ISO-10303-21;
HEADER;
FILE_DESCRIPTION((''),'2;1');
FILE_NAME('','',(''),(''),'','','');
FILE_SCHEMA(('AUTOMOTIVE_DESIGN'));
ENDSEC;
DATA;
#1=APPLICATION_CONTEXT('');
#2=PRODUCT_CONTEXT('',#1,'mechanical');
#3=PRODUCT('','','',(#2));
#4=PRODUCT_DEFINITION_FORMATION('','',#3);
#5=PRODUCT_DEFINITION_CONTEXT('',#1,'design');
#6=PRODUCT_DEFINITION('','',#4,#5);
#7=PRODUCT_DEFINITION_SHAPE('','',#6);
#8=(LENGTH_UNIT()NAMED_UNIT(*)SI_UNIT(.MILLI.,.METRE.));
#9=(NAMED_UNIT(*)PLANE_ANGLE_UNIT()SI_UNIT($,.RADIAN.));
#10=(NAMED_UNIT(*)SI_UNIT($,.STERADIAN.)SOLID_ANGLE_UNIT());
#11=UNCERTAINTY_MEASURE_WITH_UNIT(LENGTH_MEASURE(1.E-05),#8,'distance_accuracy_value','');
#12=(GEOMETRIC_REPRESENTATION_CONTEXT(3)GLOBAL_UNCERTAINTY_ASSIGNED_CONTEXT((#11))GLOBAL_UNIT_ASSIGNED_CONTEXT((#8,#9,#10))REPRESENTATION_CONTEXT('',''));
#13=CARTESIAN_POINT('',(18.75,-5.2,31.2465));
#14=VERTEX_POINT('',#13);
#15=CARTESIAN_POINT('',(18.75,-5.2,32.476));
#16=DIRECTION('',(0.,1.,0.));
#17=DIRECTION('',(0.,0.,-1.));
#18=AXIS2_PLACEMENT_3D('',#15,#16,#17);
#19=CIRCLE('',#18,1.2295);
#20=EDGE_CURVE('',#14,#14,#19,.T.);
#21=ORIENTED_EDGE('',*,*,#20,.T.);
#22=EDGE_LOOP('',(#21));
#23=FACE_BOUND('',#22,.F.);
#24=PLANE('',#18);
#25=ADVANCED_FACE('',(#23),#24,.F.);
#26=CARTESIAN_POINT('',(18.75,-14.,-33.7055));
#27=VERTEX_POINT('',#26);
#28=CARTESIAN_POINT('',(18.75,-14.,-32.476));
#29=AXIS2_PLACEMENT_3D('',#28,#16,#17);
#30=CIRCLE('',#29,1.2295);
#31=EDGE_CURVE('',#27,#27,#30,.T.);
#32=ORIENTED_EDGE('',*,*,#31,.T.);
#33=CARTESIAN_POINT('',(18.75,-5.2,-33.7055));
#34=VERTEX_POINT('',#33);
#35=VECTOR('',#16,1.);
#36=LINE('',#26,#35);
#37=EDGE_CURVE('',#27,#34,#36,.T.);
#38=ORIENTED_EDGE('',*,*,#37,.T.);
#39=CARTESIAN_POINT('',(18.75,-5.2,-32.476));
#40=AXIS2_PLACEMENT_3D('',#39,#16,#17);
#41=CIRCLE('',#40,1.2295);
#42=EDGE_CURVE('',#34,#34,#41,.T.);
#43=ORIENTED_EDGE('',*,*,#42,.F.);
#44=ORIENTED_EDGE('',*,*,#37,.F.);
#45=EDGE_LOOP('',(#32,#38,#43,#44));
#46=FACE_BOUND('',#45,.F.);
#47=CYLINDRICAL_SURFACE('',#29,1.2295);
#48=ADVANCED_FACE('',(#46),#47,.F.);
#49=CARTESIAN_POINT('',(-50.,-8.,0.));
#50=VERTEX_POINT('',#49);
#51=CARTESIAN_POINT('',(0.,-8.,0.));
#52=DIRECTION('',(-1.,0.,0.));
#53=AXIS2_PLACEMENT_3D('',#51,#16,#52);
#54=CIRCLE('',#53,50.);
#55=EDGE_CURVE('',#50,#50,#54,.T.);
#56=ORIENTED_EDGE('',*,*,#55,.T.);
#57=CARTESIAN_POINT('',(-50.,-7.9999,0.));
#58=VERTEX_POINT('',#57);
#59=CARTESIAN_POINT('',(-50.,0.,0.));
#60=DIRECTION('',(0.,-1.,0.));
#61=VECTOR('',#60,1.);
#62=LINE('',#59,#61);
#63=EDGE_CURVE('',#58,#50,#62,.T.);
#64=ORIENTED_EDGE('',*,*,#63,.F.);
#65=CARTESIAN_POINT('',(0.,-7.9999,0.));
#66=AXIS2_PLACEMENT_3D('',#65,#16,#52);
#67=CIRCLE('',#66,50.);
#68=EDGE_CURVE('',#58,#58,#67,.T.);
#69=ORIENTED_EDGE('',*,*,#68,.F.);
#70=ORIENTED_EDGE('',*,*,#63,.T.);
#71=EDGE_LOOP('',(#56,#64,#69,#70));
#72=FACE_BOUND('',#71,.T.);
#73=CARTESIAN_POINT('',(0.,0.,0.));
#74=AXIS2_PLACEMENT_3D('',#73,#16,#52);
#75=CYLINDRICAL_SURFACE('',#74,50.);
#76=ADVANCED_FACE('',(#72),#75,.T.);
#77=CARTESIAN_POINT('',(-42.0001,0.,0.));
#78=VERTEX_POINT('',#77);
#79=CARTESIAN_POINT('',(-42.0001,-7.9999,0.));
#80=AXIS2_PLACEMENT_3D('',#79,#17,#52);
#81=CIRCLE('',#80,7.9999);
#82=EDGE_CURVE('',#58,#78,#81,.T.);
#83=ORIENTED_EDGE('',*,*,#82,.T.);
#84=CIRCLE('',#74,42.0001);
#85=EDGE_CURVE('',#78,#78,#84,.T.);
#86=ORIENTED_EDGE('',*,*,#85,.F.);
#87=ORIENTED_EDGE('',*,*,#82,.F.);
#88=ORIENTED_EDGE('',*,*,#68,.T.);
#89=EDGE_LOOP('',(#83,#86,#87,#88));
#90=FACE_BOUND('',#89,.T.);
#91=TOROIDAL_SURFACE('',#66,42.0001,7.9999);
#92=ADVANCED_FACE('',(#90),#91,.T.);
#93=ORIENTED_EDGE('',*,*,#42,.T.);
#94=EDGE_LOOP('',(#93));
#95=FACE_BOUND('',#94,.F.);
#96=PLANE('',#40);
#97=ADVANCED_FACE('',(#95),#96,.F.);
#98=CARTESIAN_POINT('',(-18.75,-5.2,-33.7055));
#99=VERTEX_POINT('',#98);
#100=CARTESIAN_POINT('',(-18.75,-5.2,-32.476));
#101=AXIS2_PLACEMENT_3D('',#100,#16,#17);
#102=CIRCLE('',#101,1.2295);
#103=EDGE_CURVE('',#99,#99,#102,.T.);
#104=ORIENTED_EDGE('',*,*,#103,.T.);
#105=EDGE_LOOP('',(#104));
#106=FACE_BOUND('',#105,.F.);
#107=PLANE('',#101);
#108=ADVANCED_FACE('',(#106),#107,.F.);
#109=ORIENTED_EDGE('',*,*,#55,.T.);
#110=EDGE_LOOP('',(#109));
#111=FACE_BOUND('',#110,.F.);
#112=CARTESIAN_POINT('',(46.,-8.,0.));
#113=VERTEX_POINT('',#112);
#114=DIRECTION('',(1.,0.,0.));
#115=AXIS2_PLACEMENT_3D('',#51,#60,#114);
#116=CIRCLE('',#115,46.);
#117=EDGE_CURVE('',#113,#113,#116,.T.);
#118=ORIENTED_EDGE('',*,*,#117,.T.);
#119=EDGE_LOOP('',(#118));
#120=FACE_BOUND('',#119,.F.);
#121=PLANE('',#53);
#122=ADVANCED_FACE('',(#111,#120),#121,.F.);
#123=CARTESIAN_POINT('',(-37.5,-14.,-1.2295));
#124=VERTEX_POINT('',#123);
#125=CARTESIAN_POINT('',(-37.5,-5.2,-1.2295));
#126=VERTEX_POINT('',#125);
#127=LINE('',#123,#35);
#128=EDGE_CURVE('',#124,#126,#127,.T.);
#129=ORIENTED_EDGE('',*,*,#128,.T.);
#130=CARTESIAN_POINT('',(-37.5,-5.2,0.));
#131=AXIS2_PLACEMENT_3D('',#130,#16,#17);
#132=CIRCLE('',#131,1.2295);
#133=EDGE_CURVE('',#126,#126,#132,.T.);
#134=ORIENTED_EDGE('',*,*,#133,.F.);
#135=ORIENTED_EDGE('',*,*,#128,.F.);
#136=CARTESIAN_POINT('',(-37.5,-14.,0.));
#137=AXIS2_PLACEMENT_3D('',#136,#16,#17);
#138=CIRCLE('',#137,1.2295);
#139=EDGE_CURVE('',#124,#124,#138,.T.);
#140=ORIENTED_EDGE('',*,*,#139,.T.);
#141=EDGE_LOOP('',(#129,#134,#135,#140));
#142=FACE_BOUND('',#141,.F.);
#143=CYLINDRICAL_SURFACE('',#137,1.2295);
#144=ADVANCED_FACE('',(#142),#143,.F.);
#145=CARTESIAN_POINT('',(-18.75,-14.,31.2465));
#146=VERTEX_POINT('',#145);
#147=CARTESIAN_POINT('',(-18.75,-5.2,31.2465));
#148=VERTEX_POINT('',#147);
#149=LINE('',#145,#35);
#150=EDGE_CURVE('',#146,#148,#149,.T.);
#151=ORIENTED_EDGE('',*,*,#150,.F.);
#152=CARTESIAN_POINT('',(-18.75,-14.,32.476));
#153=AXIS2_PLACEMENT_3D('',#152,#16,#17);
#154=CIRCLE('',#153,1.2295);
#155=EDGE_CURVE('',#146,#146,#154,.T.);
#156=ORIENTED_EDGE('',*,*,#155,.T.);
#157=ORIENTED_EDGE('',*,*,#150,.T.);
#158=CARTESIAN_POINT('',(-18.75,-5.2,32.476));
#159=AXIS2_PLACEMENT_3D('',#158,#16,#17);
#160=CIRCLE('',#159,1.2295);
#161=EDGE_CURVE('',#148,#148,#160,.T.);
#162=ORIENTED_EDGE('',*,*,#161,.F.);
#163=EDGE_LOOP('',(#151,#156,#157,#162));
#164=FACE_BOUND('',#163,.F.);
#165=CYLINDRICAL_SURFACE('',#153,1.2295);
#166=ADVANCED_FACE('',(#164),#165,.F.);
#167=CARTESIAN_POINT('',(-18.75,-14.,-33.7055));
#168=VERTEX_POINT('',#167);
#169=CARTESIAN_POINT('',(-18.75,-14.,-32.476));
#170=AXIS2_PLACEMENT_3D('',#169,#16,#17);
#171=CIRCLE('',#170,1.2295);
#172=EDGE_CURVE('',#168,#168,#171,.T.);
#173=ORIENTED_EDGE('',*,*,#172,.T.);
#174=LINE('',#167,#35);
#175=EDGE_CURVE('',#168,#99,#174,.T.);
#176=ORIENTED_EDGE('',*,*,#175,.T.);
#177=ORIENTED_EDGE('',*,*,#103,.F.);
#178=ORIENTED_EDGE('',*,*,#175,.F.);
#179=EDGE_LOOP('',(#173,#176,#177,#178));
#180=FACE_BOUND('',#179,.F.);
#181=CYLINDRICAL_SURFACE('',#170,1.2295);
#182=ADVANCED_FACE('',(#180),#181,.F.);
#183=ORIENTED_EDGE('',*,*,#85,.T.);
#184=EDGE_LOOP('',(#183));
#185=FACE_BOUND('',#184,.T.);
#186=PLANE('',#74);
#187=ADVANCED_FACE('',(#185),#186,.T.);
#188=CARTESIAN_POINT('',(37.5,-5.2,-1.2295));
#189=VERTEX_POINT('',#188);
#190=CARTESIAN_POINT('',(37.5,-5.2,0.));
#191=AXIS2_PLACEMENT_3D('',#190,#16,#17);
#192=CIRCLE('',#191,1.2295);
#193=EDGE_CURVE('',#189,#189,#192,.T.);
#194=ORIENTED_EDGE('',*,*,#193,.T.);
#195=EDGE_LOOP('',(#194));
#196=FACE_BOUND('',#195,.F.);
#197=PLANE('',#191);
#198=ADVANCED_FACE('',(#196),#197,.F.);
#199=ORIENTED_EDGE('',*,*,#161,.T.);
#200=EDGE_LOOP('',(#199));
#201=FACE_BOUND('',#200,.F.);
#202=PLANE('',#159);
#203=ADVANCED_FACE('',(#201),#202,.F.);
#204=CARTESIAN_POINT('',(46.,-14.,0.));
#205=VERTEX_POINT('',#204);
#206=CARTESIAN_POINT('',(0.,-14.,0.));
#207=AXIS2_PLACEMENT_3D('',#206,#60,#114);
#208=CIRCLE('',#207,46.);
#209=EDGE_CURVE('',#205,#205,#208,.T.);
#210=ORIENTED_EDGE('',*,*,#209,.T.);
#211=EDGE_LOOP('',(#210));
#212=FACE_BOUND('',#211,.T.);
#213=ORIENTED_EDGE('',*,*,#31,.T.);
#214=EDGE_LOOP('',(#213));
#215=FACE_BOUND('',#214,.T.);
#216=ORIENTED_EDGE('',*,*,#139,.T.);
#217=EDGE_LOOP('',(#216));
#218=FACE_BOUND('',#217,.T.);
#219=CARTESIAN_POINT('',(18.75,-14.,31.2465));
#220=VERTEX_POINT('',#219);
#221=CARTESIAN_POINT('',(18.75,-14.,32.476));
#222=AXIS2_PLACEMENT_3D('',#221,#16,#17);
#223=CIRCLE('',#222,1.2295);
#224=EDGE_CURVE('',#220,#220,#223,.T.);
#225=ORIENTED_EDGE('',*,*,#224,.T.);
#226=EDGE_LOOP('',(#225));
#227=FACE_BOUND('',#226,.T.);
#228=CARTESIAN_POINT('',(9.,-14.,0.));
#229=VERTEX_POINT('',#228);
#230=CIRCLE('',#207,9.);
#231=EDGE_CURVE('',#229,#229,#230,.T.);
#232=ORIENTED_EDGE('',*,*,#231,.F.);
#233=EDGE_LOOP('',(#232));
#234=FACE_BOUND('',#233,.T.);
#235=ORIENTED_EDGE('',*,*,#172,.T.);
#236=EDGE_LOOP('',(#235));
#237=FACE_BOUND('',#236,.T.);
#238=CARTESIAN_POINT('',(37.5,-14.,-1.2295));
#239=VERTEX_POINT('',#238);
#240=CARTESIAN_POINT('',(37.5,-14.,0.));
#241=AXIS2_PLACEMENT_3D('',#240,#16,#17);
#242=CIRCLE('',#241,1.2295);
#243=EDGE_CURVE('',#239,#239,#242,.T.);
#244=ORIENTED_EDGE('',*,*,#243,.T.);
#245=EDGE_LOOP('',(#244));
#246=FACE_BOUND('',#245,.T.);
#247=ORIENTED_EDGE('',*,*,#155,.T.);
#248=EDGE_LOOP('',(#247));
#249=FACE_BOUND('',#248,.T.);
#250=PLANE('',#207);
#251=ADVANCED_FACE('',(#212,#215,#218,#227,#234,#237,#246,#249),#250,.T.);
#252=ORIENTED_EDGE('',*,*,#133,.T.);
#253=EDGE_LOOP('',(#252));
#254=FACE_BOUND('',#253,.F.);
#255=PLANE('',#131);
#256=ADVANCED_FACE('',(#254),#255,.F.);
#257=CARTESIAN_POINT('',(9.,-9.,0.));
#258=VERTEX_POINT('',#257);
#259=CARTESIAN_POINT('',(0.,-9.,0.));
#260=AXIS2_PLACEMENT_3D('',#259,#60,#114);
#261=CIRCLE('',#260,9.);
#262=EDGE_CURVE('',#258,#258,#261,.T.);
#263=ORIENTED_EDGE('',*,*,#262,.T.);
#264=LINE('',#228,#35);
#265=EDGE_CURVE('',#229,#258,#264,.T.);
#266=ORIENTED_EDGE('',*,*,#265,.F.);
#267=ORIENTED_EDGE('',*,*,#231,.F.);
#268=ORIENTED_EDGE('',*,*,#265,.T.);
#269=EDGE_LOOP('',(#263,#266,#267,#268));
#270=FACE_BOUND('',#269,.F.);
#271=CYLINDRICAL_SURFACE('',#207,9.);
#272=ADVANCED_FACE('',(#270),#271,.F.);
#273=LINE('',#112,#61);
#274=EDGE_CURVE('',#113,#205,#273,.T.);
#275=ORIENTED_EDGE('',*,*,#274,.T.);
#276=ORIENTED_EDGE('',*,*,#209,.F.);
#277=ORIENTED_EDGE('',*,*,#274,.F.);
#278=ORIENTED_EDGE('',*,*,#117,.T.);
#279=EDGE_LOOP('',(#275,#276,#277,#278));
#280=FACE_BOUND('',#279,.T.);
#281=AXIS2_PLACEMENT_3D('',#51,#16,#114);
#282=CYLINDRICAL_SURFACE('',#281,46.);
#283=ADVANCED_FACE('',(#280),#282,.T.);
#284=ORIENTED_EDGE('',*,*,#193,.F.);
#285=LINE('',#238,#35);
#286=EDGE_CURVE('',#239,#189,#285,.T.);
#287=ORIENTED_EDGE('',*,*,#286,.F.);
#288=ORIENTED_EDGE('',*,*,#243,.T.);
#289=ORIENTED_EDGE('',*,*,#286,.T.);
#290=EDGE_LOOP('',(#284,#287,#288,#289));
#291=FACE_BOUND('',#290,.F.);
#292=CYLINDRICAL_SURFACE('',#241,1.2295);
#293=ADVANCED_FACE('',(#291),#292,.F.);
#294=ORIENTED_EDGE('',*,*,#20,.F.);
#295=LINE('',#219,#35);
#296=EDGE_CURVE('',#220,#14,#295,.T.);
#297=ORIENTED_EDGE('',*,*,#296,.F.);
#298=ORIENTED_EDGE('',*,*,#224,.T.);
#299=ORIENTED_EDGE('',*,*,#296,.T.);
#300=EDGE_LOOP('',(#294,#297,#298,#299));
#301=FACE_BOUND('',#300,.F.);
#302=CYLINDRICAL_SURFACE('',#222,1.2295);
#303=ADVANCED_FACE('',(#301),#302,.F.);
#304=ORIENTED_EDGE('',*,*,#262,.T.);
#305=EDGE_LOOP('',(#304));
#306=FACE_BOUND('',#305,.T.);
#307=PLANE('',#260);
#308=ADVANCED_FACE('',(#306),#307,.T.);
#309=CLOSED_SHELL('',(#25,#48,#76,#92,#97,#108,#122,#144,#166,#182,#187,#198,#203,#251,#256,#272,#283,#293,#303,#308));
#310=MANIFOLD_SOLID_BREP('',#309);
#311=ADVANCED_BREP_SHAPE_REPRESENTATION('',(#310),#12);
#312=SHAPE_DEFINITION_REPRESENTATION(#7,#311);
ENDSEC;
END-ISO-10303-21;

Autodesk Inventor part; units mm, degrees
ref_plane "YZ Plane" through (0, 0, 0) normal (1, 0, 0) x (0, 1, 0)
ref_plane "XZ Plane" through (0, 0, 0) normal (0, 1, 0) x (-1, 0, 0)
ref_plane "XY Plane" through (0, 0, 0) normal (0, 0, 1) x (1, 0, 0)
sketch "Boceto1" plane through (0, 0, 0) normal (0, 1, 0) x (-1, 0, 0)
  circle A0 centre (0, 0) radius 50
  dimension "Diametro" = 100
extrude "Extrusión1" add sketch "Boceto1" against normal blind 8
fillet "Empalme1" radius 8 1 edges at (50, 0, 0)
sketch "Boceto2" plane through (0, -8, 0) normal (0, -1, 0) x (1, 0, 0)
  circle A0 centre (0, 0) radius 46
  circle A1 centre (0, 0) radius 50 projected
  dimension "d22" = 4
extrude "Extrusión3" add sketch "Boceto2" along normal blind 6 contours A0
sketch "Boceto3" plane through (0, -14, 0) normal (0, -1, 0) x (1, 0, 0)
  circle A0 centre (0, 0) radius 9
  point P0 (-37.5, 0)
  point P1 (-18.75, -32.476)
  point P2 (18.75, -32.476)
  point P3 (37.5, 0)
  point P4 (18.75, 32.476)
  point P5 (-18.75, 32.476)
  dimension "d25" = 37.5
  dimension "d35" = 360
  dimension "d37" = 18
hole "Agujero2" at (-37.5, -14, 0) at (-18.75, -14, 32.476) at (-18.75, -14, -32.476) at (18.75, -14, 32.476) at (37.5, -14, 0) at (18.75, -14, -32.476) direction (0, 1, 0) diameter 2.459 depth 8.8 thread size "M3x0.5" class "6H" standard "ANSI Metric M Profile"
extrude "Extrusión4" cut sketch "Boceto3" against normal blind 5
properties part number "Tapa" material "Aluminio 6061"
